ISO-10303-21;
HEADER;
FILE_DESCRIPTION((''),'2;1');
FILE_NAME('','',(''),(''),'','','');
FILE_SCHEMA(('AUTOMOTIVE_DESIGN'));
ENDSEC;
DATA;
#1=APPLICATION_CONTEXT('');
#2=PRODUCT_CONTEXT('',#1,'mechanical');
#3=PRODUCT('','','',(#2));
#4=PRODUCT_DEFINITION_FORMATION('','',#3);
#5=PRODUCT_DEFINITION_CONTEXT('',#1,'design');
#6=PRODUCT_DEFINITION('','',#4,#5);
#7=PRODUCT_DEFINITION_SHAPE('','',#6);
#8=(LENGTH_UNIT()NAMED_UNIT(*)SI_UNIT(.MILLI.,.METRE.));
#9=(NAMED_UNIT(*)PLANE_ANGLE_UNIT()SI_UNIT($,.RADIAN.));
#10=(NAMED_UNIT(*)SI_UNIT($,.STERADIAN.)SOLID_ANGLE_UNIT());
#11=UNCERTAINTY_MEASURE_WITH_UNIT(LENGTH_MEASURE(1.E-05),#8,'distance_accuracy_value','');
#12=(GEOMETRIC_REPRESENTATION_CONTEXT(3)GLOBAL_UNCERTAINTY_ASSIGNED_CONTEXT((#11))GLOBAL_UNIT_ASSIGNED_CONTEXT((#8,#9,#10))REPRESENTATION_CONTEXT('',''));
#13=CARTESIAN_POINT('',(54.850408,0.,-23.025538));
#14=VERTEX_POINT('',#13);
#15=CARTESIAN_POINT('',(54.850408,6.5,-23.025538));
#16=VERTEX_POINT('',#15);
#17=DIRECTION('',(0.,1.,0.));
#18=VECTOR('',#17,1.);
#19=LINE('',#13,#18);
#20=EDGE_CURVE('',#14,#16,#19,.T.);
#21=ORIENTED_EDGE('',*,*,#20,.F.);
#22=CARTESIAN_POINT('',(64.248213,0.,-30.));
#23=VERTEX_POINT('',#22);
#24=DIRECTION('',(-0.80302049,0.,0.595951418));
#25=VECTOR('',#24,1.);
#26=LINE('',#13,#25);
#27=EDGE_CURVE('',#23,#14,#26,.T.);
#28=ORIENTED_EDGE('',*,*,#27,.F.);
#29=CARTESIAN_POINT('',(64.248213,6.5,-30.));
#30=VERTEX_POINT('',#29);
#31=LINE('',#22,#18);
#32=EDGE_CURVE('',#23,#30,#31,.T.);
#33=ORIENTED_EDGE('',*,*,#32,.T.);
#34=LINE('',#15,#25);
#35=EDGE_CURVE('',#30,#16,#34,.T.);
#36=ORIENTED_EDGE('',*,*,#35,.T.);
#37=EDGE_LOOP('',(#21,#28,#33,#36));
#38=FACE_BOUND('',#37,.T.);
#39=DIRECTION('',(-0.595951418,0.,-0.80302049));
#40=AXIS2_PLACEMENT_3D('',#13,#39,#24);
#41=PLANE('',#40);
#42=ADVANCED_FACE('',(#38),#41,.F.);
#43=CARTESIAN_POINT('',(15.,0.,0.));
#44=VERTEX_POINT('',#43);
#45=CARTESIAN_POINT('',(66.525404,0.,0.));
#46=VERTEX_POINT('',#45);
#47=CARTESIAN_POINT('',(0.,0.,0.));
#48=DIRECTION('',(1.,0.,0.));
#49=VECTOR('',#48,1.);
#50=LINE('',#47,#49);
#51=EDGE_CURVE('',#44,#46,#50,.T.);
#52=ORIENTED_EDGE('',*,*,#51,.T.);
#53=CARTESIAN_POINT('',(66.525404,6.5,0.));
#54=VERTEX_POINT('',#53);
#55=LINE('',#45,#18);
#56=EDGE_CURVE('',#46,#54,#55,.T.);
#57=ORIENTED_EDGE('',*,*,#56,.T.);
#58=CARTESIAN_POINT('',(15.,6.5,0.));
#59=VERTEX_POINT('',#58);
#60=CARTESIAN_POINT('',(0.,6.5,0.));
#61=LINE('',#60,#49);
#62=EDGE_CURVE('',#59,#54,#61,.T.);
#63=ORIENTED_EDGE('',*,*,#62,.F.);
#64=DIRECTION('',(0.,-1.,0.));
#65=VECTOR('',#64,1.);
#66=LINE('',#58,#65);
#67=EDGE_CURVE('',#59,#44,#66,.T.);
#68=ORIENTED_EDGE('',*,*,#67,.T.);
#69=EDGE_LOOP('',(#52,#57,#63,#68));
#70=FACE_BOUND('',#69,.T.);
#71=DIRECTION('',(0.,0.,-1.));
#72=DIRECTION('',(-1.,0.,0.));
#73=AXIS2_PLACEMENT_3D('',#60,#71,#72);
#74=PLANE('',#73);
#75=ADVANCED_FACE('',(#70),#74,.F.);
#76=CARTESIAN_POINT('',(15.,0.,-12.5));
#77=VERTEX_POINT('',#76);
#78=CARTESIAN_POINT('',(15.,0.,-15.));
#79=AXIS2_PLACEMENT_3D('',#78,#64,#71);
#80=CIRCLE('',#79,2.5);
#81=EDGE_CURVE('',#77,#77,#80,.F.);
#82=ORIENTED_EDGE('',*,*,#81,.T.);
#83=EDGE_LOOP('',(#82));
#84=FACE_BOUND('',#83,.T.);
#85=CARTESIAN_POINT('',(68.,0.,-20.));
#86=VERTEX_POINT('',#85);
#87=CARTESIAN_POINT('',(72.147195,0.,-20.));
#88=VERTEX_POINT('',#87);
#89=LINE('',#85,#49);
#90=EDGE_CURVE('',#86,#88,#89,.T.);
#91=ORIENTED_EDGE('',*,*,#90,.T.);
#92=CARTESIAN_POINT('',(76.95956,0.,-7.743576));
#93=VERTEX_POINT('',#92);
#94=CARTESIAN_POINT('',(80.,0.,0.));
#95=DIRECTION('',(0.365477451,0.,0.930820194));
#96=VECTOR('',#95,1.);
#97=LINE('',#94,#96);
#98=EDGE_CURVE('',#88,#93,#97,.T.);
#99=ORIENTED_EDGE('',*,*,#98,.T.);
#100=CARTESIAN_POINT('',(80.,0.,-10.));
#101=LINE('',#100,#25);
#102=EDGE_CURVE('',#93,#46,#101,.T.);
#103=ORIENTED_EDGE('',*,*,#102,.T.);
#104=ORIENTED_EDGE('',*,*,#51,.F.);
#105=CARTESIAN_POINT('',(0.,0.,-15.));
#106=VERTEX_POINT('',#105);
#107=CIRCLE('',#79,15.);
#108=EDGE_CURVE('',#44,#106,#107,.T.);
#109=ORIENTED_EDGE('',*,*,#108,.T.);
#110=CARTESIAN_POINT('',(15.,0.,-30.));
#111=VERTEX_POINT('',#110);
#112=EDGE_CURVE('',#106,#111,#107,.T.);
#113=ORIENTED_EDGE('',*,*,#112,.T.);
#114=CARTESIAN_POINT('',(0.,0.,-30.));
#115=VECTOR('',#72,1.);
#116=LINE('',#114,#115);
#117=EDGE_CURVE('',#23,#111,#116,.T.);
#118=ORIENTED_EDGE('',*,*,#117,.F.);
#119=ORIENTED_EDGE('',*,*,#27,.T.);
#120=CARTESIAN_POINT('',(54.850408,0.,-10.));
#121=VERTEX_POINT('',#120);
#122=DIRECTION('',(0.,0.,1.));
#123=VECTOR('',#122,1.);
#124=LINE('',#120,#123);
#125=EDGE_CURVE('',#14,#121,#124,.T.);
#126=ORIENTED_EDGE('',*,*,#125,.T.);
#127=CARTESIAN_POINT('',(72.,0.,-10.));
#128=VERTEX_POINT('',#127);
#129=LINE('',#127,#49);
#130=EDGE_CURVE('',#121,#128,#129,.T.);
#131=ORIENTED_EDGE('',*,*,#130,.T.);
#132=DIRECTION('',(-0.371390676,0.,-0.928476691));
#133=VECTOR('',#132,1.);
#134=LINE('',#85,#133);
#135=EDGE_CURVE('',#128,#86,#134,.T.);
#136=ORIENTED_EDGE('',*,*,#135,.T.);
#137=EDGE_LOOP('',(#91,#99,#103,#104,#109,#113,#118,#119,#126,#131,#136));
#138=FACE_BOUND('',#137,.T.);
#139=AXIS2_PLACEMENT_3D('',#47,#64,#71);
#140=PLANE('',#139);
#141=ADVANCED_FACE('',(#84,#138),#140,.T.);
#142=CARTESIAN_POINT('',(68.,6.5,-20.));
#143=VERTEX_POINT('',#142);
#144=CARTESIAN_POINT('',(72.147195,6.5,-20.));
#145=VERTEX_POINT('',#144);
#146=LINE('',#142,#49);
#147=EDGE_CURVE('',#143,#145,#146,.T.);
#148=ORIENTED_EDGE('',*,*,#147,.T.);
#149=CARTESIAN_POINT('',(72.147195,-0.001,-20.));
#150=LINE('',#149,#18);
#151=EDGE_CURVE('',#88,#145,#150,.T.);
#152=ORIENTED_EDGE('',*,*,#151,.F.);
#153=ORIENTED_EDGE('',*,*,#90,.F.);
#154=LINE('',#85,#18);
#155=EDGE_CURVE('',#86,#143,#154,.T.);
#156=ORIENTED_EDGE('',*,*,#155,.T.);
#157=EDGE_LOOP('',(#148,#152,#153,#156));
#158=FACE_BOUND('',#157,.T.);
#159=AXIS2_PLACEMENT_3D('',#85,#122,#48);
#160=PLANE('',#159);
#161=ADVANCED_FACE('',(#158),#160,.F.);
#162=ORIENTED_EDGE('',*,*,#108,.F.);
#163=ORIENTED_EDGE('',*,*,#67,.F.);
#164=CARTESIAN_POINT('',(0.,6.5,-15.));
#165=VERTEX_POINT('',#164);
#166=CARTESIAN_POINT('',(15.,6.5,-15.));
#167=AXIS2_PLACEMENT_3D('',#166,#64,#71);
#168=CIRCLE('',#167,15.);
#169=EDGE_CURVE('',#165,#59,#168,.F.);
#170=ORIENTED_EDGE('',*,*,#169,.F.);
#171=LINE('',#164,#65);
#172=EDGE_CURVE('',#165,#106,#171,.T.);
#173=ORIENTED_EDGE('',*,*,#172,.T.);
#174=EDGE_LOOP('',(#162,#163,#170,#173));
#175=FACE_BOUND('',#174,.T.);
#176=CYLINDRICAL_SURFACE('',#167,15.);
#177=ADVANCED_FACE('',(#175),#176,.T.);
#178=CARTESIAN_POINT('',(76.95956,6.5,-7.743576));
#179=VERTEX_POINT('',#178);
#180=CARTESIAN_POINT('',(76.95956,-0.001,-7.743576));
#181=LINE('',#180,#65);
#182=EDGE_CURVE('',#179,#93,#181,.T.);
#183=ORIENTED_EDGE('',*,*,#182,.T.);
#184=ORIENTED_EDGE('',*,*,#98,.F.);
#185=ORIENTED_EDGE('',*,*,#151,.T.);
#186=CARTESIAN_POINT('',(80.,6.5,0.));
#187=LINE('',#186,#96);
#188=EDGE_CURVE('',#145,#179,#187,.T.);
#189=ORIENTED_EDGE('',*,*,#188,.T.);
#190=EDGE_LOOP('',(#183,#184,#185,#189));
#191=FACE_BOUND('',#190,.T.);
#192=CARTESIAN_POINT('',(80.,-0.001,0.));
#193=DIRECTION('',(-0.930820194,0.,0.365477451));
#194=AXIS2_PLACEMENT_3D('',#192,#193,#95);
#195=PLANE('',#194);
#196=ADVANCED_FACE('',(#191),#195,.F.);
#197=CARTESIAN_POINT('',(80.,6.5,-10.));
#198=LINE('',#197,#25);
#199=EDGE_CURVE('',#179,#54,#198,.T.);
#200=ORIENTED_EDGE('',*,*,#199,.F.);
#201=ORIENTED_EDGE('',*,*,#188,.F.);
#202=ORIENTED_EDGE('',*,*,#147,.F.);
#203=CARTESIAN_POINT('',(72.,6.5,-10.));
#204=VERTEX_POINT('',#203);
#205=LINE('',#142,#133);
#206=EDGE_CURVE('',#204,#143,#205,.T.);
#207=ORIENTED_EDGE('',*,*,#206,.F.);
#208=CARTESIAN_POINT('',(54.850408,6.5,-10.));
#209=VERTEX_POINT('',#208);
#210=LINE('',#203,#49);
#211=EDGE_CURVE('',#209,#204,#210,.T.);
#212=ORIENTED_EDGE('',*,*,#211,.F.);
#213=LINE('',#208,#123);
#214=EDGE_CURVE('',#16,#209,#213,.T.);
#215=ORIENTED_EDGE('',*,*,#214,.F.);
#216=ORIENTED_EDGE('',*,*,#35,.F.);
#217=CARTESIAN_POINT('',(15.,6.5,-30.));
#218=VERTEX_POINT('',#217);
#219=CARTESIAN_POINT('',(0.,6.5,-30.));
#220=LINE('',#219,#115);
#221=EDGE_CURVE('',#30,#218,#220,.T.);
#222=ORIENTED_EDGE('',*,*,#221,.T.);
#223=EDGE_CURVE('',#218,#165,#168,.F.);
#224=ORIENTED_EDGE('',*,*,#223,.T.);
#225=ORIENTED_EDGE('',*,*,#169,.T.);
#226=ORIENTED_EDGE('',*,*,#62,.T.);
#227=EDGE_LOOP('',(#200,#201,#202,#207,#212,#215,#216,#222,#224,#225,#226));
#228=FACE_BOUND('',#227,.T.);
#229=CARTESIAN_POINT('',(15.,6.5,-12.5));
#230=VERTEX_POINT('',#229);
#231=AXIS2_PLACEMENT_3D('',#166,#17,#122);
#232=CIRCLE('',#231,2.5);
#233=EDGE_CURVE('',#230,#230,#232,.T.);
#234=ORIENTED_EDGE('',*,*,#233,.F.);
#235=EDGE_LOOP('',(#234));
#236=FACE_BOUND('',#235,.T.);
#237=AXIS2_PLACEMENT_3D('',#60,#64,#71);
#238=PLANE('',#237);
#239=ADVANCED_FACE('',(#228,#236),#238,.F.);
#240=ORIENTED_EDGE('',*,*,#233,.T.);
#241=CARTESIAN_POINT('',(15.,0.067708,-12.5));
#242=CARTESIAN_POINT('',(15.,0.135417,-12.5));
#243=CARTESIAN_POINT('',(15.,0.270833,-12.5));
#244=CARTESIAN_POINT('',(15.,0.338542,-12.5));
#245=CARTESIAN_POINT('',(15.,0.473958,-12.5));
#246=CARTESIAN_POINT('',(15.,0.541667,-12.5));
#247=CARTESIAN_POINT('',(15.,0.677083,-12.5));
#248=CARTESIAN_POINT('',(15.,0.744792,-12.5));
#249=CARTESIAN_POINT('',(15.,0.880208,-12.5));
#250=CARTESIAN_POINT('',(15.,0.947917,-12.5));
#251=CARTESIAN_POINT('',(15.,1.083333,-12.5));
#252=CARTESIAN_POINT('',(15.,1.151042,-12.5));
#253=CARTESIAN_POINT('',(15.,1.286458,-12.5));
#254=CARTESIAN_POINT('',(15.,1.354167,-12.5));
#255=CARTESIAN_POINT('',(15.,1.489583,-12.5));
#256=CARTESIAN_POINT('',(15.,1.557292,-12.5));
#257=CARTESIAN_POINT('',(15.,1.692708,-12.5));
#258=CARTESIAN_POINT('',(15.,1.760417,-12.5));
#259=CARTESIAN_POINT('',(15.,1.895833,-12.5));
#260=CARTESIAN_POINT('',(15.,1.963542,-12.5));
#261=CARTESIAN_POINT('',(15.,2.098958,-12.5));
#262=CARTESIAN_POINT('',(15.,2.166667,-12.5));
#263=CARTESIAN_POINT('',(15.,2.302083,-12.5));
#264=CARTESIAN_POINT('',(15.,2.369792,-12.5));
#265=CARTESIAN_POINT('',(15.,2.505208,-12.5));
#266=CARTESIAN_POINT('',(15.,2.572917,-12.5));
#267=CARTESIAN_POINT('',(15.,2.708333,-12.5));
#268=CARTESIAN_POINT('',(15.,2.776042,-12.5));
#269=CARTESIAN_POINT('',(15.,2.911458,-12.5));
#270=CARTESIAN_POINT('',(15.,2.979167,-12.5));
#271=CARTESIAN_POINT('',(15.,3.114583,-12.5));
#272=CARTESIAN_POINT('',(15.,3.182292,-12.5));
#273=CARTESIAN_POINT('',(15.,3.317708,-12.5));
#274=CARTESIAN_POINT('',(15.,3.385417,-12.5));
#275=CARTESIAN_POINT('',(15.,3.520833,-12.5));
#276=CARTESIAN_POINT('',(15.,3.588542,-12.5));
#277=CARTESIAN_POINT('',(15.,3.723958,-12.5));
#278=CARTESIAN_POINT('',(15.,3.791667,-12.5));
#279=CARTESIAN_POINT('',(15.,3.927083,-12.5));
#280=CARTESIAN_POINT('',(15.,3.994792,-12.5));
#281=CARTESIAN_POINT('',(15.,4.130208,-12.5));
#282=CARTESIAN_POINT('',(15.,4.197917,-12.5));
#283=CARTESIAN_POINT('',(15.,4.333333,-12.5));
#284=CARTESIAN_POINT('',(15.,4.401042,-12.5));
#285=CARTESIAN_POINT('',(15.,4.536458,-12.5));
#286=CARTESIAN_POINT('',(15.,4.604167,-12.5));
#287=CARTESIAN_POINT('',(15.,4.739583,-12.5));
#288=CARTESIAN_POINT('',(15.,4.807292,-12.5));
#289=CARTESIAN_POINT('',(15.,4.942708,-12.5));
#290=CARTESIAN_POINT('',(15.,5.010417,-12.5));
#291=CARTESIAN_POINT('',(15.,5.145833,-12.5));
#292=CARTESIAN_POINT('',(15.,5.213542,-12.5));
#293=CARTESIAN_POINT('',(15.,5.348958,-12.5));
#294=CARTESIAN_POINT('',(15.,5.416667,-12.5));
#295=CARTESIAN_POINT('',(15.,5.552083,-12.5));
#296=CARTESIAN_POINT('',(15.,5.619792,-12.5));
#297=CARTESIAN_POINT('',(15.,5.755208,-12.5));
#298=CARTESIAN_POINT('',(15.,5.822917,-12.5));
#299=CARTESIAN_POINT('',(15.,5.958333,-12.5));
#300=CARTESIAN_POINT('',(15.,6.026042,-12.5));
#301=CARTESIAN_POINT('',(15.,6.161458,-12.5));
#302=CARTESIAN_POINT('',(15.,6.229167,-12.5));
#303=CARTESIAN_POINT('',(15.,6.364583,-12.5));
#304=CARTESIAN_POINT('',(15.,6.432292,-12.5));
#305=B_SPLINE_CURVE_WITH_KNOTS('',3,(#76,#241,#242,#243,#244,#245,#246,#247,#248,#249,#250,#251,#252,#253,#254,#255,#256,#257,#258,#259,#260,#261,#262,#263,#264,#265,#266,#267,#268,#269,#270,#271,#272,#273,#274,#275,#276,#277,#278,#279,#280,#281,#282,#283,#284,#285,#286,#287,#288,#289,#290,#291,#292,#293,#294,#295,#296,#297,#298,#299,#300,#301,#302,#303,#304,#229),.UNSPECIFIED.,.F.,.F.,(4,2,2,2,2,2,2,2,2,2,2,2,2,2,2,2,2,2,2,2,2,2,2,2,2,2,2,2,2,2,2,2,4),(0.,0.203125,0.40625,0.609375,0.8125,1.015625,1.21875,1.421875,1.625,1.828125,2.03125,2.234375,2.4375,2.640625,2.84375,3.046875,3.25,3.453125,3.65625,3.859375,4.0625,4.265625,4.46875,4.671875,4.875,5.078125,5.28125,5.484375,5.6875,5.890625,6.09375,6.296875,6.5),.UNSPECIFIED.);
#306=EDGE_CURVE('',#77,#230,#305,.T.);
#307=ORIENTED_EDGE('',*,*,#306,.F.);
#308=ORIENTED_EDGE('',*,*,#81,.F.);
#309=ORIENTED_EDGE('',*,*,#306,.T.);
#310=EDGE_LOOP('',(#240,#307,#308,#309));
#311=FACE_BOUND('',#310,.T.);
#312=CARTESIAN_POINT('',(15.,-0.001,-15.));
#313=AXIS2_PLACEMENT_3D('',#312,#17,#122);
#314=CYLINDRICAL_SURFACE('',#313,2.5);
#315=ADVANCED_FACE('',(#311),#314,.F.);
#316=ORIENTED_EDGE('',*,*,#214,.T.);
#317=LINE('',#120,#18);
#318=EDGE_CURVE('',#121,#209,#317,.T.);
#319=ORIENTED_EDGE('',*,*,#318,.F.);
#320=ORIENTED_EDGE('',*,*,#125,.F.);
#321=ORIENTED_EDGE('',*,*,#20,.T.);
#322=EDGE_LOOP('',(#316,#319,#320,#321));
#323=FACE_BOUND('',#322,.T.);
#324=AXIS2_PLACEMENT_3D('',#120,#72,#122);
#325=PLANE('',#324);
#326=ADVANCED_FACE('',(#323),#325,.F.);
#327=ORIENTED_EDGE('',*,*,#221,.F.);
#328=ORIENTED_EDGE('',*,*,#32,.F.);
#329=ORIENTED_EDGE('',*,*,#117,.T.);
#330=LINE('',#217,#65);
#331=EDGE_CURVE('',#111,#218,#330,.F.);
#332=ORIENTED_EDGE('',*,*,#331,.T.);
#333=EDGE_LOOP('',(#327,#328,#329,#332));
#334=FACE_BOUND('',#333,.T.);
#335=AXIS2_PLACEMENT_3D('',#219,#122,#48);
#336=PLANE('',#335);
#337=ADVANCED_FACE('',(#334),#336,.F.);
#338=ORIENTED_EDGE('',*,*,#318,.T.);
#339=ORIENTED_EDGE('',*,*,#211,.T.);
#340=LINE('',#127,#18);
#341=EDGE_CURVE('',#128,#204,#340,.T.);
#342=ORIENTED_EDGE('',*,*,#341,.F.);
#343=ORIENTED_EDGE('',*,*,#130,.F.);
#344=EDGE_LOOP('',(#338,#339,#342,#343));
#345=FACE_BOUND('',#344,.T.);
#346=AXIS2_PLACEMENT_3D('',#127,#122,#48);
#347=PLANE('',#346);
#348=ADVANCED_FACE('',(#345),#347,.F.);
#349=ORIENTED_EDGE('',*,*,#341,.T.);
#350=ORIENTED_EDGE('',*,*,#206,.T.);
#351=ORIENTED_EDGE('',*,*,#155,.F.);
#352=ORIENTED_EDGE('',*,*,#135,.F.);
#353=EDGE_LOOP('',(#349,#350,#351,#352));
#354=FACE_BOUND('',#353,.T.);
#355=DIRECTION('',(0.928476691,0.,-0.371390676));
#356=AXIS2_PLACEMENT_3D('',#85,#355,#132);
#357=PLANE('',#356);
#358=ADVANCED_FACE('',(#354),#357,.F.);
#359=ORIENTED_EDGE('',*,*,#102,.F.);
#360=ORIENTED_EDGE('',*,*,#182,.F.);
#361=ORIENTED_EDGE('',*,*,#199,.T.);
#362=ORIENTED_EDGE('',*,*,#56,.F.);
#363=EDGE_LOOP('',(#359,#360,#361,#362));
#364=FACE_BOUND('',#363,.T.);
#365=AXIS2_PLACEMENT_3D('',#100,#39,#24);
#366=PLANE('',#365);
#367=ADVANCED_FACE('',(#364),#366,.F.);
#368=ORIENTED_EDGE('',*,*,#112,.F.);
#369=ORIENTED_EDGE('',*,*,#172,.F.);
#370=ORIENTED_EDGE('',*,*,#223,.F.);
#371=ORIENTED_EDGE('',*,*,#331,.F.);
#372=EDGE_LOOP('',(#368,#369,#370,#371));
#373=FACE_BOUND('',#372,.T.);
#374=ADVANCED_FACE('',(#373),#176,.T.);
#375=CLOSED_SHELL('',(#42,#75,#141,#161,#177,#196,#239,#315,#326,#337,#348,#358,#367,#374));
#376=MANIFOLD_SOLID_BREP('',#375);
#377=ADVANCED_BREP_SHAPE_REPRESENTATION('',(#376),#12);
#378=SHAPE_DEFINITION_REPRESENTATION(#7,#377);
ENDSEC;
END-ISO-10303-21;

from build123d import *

# Parameters (mm, degrees)
SKETCH1_W           = 80
SKETCH1_H           = 30
BOSS_EXTRUDE1_DEPTH = 6.5
FILLET1_R           = 15
CUT_EXTRUDE1_REACH  = 87.687
SKETCH2_R           = 2.5
CUT_EXTRUDE2_DEPTH  = 86.686930159
CUT_EXTRUDE3_REACH  = 87.687
CUT_EXTRUDE4_DEPTH  = 86.686930159


with BuildPart() as part:
    # Sketch1 → Boss-Extrude1 (new body)
    with BuildSketch(Plane(origin=(0, 0, 0), x_dir=(1, 0, 0), z_dir=(0, 1, 0))):
        with Locations((40, 15)):
            Rectangle(SKETCH1_W, SKETCH1_H)
    extrude(amount=BOSS_EXTRUDE1_DEPTH)

    # Fillet1
    fillet1_edges = [part.edges().sort_by_distance(p)[0] for p in [
        (0, 3.25, 0),
        (0, 3.25, -30),
    ]]
    fillet(fillet1_edges, radius=FILLET1_R - 0.0001)  # a hair under: the kernel refuses the full size

    # Sketch2 → Cut-Extrude1 (cut, up to next)
    with BuildSketch(Plane(origin=(0, 6.5, 0), x_dir=(1, 0, 0), z_dir=(0, 1, 0)), mode=Mode.PRIVATE) as cut_extrude1_sk1:
        with Locations(Location((15, 15, 0), (0, 0, 270))):
            Circle(SKETCH2_R)
    cut_extrude1_tool1 = extrude(cut_extrude1_sk1.sketch, amount=-CUT_EXTRUDE1_REACH, mode=Mode.PRIVATE) & part.part
    add(cut_extrude1_tool1.solids().sort_by_distance((15, 6.5, -15))[0], mode=Mode.SUBTRACT)

    # Sketch3 → Cut-Extrude2 (cut, through all)
    with BuildSketch(Plane(origin=(0, 6.5, 0), x_dir=(1, 0, 0), z_dir=(0, 1, 0))):
        Polygon((68, 20), (72, 10), (54.850407656, 10), (54.850407656, 23.025538444), (64.248213181, 30), (80, 30), (80, 20), align=None)
    extrude(amount=-CUT_EXTRUDE2_DEPTH, mode=Mode.SUBTRACT)

    # Sketch4 → Cut-Extrude3 (cut, up to next)
    with BuildSketch(Plane(origin=(0, 6.5, 0), x_dir=(1, 0, 0), z_dir=(0, 1, 0)), mode=Mode.PRIVATE) as cut_extrude3_sk1:
        Polygon((80, 20), (80, 0), (72.147195496, 20), align=None)
    cut_extrude3_tool1 = extrude(cut_extrude3_sk1.sketch, amount=-CUT_EXTRUDE3_REACH, mode=Mode.PRIVATE) & part.part
    add(cut_extrude3_tool1.solids().sort_by_distance((77.382398, 6.5, -13.333333))[0], mode=Mode.SUBTRACT)

    # Sketch5 → Cut-Extrude4 (cut, through all)
    with BuildSketch(Plane(origin=(0, 6.5, 0), x_dir=(1, 0, 0), z_dir=(0, 1, 0))):
        Polygon((80, 0), (80, 10), (66.525403502, 0), align=None)
    extrude(amount=-CUT_EXTRUDE4_DEPTH, mode=Mode.SUBTRACT)


solid = part.part
